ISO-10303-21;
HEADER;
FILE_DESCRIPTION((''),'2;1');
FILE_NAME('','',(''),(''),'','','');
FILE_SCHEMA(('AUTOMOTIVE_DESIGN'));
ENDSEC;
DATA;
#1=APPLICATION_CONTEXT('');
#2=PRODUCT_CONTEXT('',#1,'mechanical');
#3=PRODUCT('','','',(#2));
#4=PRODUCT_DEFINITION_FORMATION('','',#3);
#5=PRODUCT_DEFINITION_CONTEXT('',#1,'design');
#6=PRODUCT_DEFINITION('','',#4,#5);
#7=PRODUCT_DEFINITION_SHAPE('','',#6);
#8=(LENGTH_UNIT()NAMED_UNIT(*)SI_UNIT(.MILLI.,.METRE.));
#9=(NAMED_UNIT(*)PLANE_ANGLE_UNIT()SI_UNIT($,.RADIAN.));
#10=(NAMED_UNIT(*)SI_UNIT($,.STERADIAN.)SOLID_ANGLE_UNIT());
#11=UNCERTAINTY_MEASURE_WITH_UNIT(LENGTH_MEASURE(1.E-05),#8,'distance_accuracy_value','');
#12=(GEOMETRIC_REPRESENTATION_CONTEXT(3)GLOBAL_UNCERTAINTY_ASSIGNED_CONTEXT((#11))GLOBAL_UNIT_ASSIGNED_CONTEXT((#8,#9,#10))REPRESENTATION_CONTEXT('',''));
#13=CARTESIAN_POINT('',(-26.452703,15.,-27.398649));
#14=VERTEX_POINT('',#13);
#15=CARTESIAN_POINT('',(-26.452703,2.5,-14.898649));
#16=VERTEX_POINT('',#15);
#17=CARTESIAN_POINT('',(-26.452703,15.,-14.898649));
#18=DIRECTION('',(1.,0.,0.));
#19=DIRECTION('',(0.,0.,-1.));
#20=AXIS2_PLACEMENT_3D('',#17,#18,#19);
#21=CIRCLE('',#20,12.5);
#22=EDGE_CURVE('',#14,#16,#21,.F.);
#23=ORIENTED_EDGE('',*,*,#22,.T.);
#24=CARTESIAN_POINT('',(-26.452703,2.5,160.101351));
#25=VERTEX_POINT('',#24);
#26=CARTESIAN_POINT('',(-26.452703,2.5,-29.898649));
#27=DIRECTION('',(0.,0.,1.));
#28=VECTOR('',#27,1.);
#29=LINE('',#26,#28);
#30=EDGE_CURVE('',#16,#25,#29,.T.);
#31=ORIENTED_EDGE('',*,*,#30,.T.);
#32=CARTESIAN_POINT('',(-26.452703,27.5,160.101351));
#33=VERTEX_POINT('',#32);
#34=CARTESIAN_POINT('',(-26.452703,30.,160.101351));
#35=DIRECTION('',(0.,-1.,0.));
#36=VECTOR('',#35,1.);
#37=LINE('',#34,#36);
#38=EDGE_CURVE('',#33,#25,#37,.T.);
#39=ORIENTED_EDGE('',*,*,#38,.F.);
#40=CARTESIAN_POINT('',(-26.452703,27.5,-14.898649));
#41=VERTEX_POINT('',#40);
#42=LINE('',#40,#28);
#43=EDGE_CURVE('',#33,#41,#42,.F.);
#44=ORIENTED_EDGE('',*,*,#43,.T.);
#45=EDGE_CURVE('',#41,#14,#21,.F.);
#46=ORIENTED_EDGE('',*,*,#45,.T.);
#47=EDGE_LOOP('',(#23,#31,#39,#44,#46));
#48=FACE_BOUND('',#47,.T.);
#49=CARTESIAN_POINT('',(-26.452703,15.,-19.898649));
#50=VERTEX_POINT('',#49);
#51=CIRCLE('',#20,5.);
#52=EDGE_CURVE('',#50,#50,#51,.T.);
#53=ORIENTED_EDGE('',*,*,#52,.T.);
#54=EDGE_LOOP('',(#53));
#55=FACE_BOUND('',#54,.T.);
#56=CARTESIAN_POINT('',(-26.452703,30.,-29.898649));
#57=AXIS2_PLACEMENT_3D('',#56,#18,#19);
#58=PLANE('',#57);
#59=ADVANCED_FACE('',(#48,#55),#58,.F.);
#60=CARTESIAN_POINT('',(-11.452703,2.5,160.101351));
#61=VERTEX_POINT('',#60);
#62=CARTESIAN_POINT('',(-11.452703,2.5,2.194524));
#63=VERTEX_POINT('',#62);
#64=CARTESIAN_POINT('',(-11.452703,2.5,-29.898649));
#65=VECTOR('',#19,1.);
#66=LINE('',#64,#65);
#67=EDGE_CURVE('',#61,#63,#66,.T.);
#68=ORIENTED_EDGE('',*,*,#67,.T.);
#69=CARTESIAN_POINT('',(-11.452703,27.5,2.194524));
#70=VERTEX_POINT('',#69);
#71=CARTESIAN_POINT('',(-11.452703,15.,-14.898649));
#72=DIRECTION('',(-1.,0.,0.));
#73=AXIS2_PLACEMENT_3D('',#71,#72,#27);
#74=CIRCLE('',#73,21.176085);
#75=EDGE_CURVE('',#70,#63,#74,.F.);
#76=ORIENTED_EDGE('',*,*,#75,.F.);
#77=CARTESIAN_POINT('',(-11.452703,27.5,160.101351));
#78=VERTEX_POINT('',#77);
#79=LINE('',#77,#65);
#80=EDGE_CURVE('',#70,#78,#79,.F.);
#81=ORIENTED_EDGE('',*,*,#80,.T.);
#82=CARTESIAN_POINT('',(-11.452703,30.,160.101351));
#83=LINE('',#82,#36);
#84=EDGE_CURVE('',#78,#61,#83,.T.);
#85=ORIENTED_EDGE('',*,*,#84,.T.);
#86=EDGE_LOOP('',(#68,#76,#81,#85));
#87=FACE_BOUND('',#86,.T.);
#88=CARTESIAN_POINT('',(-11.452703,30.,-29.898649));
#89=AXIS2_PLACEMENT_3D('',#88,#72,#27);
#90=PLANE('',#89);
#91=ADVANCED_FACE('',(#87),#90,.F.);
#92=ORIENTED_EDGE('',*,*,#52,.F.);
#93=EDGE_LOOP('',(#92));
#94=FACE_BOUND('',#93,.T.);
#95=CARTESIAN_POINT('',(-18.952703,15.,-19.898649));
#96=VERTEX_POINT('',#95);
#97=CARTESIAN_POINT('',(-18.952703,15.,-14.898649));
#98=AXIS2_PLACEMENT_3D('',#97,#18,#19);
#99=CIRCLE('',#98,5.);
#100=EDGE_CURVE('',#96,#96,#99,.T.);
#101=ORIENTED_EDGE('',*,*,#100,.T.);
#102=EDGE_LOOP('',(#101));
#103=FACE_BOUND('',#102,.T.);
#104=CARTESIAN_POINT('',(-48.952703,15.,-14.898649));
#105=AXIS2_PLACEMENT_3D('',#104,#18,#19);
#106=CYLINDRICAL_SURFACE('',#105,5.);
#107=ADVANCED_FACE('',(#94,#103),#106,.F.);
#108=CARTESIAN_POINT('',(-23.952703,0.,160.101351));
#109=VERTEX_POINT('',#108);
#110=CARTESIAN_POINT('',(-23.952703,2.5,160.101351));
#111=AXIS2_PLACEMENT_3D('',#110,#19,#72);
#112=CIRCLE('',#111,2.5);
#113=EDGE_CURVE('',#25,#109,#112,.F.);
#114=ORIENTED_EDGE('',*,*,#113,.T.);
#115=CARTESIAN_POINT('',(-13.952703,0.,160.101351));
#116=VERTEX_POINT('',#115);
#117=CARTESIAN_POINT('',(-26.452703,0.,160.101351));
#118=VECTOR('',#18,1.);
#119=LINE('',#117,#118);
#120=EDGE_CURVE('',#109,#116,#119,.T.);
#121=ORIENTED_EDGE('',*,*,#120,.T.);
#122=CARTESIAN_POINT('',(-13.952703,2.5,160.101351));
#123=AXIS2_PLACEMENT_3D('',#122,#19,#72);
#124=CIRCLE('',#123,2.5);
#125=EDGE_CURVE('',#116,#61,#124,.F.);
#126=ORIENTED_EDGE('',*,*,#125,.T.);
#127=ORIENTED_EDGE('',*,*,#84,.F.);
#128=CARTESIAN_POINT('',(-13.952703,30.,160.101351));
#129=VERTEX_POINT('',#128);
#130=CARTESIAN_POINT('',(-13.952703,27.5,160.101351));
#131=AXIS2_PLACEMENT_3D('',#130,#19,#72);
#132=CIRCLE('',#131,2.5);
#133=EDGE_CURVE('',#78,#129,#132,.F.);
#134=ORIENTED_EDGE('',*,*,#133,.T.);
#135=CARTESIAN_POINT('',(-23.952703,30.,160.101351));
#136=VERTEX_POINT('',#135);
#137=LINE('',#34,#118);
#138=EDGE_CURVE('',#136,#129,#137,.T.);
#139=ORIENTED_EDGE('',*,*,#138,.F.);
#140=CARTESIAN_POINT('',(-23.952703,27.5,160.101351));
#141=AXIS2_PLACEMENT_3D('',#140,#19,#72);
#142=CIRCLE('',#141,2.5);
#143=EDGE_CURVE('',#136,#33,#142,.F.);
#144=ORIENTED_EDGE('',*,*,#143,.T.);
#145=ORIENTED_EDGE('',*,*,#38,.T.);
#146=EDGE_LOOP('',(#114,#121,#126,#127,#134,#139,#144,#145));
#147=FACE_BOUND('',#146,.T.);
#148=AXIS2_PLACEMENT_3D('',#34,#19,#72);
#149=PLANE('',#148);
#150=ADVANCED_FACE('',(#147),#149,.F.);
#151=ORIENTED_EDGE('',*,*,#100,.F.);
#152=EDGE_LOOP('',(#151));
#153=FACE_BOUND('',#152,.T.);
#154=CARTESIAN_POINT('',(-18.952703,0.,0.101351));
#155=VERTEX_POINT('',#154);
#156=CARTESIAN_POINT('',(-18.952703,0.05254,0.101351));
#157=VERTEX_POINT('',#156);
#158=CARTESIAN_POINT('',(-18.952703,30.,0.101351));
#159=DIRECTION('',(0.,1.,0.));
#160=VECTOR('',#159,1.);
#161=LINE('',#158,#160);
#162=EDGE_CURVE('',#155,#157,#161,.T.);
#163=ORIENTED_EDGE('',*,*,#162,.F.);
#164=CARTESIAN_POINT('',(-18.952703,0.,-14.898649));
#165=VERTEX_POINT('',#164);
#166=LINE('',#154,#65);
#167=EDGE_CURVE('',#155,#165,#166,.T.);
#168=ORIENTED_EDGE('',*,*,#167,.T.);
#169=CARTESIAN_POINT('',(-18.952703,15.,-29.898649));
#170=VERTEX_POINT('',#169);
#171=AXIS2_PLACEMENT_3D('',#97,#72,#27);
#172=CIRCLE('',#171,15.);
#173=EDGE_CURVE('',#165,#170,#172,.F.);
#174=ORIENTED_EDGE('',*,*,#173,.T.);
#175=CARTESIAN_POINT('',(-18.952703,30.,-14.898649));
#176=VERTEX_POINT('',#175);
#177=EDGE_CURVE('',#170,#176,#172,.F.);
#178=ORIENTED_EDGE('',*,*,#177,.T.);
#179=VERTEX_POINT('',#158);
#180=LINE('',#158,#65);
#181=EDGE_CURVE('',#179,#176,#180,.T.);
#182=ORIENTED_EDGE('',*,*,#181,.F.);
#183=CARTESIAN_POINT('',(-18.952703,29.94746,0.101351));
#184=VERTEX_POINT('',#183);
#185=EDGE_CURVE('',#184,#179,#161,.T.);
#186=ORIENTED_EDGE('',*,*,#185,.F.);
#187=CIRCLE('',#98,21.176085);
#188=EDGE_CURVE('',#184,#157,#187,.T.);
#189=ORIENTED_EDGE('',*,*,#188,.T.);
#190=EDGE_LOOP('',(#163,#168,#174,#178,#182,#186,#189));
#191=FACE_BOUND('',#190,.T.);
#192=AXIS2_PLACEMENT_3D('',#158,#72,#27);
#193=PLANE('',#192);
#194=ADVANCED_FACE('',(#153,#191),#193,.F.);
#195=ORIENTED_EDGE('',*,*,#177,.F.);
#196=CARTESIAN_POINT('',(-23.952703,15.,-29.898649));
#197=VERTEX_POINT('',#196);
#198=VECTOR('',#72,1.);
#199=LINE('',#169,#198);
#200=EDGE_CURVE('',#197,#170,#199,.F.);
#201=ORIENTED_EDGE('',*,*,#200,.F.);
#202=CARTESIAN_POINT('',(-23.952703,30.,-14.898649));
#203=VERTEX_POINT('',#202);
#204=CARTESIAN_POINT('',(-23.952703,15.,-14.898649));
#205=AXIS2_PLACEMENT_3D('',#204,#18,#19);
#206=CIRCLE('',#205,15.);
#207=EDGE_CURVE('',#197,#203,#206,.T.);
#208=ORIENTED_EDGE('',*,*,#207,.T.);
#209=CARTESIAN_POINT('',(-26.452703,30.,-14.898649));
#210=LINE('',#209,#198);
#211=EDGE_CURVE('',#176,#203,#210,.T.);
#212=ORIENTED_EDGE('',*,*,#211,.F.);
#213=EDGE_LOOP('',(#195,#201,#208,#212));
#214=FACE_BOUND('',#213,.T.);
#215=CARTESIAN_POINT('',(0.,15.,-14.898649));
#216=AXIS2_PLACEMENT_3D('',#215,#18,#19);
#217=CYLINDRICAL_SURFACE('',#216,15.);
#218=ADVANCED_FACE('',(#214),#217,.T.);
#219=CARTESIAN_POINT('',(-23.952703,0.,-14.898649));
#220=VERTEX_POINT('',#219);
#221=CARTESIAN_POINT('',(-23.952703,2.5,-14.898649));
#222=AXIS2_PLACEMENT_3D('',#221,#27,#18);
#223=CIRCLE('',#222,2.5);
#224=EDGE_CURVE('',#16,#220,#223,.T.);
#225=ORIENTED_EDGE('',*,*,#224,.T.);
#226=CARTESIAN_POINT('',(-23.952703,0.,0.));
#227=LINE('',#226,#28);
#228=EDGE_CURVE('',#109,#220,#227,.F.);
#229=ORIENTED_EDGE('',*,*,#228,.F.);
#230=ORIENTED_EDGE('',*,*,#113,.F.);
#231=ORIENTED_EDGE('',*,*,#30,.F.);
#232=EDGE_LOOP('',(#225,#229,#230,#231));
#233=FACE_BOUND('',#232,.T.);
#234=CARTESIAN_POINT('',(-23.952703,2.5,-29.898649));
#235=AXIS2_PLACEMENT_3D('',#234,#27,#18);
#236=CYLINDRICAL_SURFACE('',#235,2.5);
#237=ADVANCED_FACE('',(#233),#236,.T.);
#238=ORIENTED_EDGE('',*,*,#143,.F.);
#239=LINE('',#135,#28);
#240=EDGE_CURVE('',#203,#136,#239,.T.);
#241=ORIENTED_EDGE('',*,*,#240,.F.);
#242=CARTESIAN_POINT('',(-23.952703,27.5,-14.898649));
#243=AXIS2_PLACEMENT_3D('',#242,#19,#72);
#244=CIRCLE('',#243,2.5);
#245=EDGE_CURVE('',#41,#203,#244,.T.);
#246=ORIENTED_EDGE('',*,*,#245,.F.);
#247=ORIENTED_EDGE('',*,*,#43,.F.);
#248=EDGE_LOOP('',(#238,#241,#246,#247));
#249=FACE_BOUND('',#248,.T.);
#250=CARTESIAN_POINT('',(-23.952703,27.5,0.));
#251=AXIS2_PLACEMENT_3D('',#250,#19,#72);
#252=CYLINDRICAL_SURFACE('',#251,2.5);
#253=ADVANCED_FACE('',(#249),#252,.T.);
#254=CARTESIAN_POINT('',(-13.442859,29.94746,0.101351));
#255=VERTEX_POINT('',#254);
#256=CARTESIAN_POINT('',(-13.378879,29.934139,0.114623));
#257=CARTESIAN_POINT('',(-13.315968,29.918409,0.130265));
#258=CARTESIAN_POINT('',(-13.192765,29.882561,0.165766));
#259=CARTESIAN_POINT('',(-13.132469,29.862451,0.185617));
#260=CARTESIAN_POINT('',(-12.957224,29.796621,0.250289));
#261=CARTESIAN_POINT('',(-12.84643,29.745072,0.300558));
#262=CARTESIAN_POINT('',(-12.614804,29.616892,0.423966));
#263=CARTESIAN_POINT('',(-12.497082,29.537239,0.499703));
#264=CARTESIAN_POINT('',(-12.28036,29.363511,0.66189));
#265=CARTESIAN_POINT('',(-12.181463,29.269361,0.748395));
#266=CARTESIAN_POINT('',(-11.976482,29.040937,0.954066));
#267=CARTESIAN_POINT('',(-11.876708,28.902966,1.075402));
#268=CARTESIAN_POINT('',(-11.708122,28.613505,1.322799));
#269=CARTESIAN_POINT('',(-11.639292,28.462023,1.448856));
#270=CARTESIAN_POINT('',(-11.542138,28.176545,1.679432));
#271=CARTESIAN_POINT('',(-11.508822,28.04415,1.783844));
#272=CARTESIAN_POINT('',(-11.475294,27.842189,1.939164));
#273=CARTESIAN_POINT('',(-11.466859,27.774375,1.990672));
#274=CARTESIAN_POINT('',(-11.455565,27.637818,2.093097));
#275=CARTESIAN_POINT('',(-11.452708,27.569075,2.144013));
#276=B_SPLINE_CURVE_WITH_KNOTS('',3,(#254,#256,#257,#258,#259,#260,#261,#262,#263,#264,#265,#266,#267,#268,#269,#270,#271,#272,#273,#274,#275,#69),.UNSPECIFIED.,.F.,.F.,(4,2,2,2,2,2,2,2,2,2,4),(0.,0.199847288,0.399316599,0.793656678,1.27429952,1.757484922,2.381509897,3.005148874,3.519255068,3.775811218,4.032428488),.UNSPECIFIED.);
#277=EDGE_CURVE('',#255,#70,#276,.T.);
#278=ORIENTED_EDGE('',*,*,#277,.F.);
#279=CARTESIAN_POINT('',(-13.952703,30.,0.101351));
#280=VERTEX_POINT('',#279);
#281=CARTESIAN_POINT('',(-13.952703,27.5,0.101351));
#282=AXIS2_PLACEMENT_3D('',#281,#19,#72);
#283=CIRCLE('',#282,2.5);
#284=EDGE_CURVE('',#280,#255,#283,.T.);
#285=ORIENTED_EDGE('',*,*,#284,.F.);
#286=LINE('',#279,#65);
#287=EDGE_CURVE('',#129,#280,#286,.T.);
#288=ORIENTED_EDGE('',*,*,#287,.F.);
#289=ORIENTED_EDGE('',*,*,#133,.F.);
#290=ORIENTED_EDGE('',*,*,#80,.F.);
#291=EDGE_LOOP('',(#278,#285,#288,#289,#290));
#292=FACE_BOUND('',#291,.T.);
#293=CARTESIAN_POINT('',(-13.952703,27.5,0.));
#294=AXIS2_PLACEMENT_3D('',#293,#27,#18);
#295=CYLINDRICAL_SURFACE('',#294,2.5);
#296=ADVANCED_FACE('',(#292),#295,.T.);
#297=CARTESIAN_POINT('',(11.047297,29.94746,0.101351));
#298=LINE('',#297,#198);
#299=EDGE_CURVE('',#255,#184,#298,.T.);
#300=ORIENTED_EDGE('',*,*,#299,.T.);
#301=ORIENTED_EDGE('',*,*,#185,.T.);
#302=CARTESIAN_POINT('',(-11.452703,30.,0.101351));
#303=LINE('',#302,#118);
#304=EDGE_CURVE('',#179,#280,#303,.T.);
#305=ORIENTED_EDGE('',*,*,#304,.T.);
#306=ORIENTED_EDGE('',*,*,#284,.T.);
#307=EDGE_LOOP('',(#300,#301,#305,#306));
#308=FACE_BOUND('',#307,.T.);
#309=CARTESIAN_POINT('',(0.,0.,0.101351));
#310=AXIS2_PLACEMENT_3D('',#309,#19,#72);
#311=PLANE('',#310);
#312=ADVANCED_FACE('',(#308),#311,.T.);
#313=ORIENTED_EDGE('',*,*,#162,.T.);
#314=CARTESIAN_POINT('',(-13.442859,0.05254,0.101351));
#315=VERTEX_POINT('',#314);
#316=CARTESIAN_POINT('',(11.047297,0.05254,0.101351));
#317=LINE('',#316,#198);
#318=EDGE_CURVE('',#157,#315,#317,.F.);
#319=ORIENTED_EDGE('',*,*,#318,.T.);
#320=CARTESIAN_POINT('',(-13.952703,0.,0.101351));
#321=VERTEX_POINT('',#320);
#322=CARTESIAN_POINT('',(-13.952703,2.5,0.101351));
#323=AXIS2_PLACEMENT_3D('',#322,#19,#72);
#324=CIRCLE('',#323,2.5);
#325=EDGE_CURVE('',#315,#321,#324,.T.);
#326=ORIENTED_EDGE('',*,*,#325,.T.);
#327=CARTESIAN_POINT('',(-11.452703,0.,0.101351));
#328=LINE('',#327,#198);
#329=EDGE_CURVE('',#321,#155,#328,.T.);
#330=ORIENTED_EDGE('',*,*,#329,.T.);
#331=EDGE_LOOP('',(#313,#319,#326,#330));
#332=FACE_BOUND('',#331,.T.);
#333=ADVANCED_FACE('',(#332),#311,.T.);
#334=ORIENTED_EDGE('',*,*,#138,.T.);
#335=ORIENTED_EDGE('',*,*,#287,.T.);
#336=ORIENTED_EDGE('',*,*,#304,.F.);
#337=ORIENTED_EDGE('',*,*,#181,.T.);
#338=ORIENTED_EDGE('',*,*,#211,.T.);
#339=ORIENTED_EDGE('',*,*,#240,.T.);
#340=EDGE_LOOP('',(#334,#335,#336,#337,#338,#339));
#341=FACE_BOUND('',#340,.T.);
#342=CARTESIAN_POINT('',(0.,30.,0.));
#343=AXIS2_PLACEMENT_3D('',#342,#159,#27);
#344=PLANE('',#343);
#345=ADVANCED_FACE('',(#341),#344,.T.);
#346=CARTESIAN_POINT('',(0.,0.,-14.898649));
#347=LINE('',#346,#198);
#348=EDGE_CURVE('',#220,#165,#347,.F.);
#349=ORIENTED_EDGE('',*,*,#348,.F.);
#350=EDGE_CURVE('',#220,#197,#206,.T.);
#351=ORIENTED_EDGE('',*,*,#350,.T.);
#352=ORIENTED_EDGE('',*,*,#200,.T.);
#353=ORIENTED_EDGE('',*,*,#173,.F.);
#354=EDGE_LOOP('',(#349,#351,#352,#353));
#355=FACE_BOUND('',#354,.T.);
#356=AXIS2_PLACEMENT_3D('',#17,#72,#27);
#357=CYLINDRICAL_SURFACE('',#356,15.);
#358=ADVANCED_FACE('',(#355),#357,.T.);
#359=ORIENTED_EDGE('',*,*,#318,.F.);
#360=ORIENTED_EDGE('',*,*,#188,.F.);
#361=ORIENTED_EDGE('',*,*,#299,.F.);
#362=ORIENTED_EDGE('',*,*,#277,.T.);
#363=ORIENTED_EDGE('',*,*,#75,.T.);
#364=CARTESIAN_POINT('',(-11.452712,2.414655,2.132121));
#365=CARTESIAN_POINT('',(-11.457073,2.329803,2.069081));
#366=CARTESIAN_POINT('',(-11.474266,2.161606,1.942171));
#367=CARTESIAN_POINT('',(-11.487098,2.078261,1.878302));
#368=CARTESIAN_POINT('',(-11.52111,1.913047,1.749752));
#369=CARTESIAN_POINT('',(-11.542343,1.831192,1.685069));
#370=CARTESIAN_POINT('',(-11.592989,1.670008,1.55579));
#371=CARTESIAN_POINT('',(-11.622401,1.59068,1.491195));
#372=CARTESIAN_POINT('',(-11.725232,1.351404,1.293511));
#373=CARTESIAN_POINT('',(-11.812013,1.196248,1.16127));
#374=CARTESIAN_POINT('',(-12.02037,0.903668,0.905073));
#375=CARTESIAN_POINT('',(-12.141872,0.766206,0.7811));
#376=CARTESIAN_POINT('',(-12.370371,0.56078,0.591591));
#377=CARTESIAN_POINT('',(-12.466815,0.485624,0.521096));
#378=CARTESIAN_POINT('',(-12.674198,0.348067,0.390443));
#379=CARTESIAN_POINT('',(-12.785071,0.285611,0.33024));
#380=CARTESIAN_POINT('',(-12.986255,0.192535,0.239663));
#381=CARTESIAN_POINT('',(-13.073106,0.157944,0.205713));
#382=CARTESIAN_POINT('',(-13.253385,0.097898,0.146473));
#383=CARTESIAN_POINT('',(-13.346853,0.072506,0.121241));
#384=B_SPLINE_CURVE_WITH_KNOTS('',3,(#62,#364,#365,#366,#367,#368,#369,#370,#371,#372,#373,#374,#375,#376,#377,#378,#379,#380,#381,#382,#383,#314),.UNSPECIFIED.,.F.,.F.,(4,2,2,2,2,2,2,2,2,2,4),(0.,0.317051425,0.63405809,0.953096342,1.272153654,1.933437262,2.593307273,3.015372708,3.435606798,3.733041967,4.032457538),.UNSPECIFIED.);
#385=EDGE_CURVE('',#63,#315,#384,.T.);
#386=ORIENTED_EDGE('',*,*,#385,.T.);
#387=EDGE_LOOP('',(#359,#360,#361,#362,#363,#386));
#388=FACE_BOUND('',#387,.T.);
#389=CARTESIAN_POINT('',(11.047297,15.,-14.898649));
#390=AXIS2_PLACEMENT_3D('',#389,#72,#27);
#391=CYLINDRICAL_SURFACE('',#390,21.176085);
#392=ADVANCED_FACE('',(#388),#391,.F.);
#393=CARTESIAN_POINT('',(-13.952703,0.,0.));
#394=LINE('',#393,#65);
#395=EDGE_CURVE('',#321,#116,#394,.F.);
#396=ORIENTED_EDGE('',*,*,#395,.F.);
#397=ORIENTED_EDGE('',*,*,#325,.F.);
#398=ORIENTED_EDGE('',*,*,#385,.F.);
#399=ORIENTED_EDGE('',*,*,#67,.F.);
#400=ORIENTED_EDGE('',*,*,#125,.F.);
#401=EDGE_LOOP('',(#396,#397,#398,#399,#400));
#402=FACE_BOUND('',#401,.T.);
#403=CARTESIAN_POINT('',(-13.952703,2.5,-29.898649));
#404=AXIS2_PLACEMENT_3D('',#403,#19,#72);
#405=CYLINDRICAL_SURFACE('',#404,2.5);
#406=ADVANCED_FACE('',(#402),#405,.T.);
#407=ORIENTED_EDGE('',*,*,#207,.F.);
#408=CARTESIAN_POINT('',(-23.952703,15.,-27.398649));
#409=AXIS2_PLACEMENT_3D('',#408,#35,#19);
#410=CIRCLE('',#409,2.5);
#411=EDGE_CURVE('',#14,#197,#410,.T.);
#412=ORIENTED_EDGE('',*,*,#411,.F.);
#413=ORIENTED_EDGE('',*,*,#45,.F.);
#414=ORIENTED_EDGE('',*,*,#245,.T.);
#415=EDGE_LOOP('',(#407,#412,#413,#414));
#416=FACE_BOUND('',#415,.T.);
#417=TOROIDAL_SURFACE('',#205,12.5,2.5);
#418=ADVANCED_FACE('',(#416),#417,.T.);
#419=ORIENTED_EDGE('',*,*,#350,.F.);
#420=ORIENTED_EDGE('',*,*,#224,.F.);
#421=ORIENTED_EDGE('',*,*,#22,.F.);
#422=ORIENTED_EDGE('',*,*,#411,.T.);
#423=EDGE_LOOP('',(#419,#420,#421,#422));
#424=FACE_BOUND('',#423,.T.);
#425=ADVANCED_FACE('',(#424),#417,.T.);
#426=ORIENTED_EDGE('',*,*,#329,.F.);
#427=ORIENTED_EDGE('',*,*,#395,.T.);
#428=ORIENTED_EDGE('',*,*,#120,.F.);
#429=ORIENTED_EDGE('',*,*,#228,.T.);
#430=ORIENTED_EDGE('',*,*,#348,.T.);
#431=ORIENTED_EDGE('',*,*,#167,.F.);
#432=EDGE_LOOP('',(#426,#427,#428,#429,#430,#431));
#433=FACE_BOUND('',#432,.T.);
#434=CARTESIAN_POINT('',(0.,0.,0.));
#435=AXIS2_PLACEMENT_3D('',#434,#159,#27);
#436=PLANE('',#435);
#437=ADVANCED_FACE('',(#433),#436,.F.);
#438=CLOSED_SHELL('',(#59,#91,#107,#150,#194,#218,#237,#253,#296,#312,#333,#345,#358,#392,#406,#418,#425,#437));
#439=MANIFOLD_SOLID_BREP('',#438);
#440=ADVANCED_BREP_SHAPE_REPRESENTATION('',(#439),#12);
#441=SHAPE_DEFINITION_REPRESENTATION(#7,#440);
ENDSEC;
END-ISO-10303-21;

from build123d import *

# Parameters (mm, degrees)
SKETCH1_W           = 15
SKETCH1_H           = 190
BOSS_EXTRUDE1_DEPTH = 30
SKETCH2_W           = 7.5
SKETCH2_H           = 30
CUT_EXTRUDE1_DEPTH  = 30
SKETCH4_R           = 5
CUT_EXTRUDE2_DEPTH  = 30
FILLET2_R           = 15
SKETCH5_R           = 21.176084542
CUT_EXTRUDE3_DEPTH  = 30
FILLET4_R           = 2.5


with BuildPart() as part:
    # Sketch1 → Boss-Extrude1 (new body)
    with BuildSketch(Plane(origin=(0, 0, 0), x_dir=(1, 0, 0), z_dir=(0, 1, 0))):
        with Locations((-18.952702703, -65.101351351)):
            Rectangle(SKETCH1_W, SKETCH1_H)
    extrude(amount=BOSS_EXTRUDE1_DEPTH)

    # Sketch2 → Cut-Extrude1 (cut)
    with BuildSketch(Plane(origin=(0, 0, -29.898648649), x_dir=(-1, 0, 0), z_dir=(0, 0, -1))):
        with Locations((15.202702703, 15)):
            Rectangle(SKETCH2_W, SKETCH2_H)
    extrude(amount=-CUT_EXTRUDE1_DEPTH, mode=Mode.SUBTRACT)

    # Sketch4 → Cut-Extrude2 (cut)
    with BuildSketch(Plane(origin=(-18.952702703, 0, 0), x_dir=(0, 0, -1), z_dir=(1, 0, 0))):
        with Locations((14.898648649, 15)):
            Circle(SKETCH4_R)
    extrude(amount=-CUT_EXTRUDE2_DEPTH, mode=Mode.SUBTRACT)

    # Fillet2
    fillet2_edges = [part.edges().sort_by_distance(p)[0] for p in [
        (-22.702702703, 0, -29.898648649),
        (-22.702702703, 30, -29.898648649),
    ]]
    fillet(fillet2_edges, radius=FILLET2_R - 0.0001)  # a hair under: the kernel refuses the full size

    # Sketch5 → Cut-Extrude3 (cut)
    with BuildSketch(Plane(origin=(-18.952702703, 0, 0), x_dir=(0, 0, -1), z_dir=(1, 0, 0))):
        with Locations((14.898648649, 15)):
            Circle(SKETCH5_R)
    extrude(amount=CUT_EXTRUDE3_DEPTH, mode=Mode.SUBTRACT)

    # Fillet4
    fillet4_edges = [part.edges().sort_by_distance(p)[0] for p in [
        (-26.452702703, 0, 72.601301351),
        (-26.452702703, 4.393368993, -25.505279656),
        (-26.452702703, 25.606631007, -25.505279656),
        (-26.452702703, 30, 72.601301351),
        (-11.452702703, 30, 80.101351351),
        (-11.452702703, 0, 80.101351351),
    ]]
    fillet(fillet4_edges, radius=FILLET4_R)


solid = part.part
